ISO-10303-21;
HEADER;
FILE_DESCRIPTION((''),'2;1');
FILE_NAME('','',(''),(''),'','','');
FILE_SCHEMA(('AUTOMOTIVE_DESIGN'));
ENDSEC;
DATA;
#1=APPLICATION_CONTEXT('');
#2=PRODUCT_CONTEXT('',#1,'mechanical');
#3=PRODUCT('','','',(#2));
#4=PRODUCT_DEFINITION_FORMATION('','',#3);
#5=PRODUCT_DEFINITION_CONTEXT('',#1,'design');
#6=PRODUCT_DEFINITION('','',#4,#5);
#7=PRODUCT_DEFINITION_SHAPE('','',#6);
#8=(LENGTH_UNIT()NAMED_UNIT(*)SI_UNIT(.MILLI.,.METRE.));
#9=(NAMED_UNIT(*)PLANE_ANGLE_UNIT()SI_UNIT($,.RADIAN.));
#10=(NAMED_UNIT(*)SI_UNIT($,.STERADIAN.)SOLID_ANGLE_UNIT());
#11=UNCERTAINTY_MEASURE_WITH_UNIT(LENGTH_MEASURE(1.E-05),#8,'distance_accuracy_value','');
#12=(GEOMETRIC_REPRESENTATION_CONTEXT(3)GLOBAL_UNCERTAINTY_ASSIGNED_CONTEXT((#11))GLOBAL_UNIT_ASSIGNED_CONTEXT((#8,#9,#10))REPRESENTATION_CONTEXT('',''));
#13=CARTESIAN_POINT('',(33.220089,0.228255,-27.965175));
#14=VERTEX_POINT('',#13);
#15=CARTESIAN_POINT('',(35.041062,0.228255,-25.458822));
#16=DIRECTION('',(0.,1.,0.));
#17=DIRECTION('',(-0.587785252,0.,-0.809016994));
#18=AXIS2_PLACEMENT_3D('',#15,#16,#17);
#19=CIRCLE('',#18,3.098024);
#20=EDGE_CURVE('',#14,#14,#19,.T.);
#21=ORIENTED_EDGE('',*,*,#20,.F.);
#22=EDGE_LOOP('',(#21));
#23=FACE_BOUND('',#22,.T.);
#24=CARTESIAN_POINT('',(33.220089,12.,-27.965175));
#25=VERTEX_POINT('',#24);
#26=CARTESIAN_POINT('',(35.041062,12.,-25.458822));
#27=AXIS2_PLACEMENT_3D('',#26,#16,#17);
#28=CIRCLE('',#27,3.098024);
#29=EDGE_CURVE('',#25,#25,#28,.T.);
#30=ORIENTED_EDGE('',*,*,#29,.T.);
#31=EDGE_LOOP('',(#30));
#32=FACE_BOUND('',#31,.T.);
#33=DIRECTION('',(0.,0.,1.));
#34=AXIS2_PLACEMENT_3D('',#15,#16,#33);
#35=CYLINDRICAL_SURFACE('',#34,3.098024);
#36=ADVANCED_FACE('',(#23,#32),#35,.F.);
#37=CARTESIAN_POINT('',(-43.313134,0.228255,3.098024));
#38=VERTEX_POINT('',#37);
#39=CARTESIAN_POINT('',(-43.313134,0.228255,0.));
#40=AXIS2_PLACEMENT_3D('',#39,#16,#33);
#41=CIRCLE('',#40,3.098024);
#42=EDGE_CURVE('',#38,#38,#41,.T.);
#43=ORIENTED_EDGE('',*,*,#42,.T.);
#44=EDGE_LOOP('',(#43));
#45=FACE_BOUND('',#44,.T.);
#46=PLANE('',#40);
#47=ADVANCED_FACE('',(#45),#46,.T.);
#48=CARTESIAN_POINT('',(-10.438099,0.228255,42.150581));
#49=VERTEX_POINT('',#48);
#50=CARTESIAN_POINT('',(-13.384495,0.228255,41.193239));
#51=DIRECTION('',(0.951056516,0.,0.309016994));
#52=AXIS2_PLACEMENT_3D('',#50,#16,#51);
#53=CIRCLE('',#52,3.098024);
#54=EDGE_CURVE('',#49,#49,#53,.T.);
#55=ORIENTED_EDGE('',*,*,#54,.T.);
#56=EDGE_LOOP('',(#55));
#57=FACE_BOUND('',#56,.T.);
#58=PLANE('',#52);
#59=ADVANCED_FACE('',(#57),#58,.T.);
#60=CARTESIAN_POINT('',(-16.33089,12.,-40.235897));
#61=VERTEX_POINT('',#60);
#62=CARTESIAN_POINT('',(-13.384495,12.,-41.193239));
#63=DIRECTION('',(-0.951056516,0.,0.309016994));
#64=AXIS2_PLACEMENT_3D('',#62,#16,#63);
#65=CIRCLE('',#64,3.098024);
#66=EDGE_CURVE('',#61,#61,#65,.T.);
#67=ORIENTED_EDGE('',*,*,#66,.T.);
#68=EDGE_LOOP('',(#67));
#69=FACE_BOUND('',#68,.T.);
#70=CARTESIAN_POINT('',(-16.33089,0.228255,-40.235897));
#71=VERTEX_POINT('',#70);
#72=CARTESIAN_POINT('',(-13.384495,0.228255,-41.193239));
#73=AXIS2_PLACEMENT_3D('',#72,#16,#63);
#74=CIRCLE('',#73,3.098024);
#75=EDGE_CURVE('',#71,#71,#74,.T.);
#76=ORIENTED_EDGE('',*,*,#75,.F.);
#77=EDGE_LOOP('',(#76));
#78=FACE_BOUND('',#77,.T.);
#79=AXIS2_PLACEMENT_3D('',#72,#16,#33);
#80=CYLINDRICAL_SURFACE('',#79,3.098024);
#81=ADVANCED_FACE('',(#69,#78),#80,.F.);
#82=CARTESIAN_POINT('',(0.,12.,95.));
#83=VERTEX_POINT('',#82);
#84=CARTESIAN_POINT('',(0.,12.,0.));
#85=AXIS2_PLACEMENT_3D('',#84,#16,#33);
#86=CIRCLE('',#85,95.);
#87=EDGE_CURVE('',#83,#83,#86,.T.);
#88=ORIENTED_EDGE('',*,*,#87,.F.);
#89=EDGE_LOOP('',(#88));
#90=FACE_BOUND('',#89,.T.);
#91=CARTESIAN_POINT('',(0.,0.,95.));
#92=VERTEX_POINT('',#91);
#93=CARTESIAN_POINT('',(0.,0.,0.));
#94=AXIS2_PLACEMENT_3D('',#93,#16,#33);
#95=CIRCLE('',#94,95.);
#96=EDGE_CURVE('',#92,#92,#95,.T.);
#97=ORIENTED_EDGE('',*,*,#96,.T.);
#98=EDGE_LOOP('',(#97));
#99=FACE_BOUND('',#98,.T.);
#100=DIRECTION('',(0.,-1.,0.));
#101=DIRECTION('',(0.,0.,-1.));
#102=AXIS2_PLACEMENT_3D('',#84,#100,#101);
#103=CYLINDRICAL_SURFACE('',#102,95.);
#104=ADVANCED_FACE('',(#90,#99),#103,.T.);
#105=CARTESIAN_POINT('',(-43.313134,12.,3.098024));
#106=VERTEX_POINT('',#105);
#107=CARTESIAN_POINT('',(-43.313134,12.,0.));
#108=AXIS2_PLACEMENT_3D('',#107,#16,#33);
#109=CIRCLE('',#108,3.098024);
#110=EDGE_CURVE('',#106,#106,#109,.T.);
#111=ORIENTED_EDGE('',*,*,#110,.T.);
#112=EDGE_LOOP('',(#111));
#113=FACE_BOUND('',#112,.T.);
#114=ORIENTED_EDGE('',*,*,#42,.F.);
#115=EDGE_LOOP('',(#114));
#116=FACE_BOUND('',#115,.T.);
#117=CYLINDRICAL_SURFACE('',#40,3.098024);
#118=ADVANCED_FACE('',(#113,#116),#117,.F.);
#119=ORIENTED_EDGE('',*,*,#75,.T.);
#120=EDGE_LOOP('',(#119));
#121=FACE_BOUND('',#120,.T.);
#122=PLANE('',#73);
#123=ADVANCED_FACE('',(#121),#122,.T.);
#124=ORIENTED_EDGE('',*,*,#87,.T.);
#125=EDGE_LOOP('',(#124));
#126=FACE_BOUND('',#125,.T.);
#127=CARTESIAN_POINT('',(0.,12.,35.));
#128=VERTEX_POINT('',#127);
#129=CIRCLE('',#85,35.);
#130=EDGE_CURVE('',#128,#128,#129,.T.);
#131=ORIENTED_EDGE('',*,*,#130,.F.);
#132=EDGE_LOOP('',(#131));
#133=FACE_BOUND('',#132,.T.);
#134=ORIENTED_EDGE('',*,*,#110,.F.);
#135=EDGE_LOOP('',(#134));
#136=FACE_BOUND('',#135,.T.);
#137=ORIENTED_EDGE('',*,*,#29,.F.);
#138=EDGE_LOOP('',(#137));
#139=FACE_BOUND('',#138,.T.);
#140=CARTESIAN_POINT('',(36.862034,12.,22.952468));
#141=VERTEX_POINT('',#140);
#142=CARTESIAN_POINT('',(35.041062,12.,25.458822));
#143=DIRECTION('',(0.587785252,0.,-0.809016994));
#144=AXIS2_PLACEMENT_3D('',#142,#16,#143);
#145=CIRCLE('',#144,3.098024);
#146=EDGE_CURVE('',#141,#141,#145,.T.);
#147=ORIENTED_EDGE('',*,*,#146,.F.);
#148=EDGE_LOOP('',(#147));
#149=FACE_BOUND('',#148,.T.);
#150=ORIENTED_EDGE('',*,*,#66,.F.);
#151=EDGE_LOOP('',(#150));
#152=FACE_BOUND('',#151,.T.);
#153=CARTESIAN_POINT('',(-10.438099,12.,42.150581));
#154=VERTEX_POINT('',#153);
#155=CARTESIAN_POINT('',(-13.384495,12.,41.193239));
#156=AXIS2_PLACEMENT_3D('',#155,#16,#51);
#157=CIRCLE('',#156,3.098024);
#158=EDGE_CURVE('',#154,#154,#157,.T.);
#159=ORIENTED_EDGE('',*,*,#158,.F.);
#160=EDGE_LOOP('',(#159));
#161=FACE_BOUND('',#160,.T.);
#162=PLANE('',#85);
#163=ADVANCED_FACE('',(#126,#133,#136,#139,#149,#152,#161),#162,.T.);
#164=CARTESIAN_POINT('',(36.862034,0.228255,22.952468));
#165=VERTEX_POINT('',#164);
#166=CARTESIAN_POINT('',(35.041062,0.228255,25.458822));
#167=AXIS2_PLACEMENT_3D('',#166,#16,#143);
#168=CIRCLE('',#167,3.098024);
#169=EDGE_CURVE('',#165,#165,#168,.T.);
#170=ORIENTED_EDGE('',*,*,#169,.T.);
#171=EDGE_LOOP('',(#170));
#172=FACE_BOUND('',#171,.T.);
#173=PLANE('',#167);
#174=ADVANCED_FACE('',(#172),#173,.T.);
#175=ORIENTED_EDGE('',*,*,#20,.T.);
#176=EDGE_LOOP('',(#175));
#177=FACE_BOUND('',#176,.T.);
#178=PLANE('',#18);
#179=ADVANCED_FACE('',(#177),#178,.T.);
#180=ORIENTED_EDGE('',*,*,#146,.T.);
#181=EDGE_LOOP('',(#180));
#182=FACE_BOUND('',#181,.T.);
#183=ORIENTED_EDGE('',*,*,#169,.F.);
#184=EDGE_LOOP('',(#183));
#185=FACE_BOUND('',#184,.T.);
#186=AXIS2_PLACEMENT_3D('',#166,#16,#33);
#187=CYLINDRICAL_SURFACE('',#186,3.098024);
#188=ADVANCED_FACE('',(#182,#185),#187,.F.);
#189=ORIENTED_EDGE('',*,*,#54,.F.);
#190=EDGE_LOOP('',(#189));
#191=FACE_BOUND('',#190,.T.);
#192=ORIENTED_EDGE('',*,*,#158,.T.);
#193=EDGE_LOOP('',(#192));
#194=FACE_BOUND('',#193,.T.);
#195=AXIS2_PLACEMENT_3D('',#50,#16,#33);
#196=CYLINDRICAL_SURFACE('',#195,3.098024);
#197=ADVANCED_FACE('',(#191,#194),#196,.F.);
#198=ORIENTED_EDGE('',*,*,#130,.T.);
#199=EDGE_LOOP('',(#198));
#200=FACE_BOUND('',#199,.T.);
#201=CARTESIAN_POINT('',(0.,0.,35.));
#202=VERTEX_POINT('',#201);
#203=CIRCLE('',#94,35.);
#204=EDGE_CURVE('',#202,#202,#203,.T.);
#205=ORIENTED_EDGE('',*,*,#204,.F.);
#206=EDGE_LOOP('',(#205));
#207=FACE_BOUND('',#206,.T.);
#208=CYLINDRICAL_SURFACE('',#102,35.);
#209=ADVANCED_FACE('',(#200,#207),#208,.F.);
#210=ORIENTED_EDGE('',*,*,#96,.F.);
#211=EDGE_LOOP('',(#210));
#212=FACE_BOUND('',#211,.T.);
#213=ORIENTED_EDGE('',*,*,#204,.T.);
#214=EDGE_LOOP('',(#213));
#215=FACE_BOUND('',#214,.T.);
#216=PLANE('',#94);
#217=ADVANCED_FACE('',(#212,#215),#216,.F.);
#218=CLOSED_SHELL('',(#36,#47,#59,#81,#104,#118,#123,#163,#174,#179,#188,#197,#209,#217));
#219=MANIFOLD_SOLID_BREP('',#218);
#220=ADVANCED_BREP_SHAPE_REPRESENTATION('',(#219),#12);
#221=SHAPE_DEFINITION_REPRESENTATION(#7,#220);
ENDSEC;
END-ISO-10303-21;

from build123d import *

# Parameters (mm, degrees)
SKETCH1_R           = 95
BOSS_EXTRUDE1_DEPTH = 12
SKETCH2_R           = 35
CUT_EXTRUDE1_DEPTH  = 135.88513632
SKETCH3_R           = 3.098023625
CUT_EXTRUDE2_DEPTH  = 11.771744529
CIRPATTERN1_COUNT   = 5


with BuildPart() as part:
    # Sketch1 → Boss-Extrude1 (new body)
    with BuildSketch(Plane(origin=(0, 0, 0), x_dir=(1, 0, 0), z_dir=(0, 1, 0))):
        Circle(SKETCH1_R)
    extrude(amount=BOSS_EXTRUDE1_DEPTH)

    # Sketch2 → Cut-Extrude1 (cut, through all)
    with BuildSketch(Plane(origin=(0, 0, 0), x_dir=(1, 0, 0), z_dir=(0, 1, 0))):
        Circle(SKETCH2_R)
    extrude(amount=CUT_EXTRUDE1_DEPTH, mode=Mode.SUBTRACT)

    # Sketch3 → Cut-Extrude2 (cut)
    with BuildSketch(Plane(origin=(0, 12, 0), x_dir=(1, 0, 0), z_dir=(0, 1, 0))):
        with Locations((-43.313134438, 0)):
            Circle(SKETCH3_R)
    cut_extrude2 = extrude(amount=-CUT_EXTRUDE2_DEPTH, mode=Mode.SUBTRACT)

    # CirPattern1: Cut-Extrude2 ×5 about axis
    cirpattern1_axis = Axis((0, 0, 0), (0, 1, 0))
    for i in range(1, CIRPATTERN1_COUNT):
        add(cut_extrude2.rotate(cirpattern1_axis, i * 360 / CIRPATTERN1_COUNT), mode=Mode.SUBTRACT)


solid = part.part
